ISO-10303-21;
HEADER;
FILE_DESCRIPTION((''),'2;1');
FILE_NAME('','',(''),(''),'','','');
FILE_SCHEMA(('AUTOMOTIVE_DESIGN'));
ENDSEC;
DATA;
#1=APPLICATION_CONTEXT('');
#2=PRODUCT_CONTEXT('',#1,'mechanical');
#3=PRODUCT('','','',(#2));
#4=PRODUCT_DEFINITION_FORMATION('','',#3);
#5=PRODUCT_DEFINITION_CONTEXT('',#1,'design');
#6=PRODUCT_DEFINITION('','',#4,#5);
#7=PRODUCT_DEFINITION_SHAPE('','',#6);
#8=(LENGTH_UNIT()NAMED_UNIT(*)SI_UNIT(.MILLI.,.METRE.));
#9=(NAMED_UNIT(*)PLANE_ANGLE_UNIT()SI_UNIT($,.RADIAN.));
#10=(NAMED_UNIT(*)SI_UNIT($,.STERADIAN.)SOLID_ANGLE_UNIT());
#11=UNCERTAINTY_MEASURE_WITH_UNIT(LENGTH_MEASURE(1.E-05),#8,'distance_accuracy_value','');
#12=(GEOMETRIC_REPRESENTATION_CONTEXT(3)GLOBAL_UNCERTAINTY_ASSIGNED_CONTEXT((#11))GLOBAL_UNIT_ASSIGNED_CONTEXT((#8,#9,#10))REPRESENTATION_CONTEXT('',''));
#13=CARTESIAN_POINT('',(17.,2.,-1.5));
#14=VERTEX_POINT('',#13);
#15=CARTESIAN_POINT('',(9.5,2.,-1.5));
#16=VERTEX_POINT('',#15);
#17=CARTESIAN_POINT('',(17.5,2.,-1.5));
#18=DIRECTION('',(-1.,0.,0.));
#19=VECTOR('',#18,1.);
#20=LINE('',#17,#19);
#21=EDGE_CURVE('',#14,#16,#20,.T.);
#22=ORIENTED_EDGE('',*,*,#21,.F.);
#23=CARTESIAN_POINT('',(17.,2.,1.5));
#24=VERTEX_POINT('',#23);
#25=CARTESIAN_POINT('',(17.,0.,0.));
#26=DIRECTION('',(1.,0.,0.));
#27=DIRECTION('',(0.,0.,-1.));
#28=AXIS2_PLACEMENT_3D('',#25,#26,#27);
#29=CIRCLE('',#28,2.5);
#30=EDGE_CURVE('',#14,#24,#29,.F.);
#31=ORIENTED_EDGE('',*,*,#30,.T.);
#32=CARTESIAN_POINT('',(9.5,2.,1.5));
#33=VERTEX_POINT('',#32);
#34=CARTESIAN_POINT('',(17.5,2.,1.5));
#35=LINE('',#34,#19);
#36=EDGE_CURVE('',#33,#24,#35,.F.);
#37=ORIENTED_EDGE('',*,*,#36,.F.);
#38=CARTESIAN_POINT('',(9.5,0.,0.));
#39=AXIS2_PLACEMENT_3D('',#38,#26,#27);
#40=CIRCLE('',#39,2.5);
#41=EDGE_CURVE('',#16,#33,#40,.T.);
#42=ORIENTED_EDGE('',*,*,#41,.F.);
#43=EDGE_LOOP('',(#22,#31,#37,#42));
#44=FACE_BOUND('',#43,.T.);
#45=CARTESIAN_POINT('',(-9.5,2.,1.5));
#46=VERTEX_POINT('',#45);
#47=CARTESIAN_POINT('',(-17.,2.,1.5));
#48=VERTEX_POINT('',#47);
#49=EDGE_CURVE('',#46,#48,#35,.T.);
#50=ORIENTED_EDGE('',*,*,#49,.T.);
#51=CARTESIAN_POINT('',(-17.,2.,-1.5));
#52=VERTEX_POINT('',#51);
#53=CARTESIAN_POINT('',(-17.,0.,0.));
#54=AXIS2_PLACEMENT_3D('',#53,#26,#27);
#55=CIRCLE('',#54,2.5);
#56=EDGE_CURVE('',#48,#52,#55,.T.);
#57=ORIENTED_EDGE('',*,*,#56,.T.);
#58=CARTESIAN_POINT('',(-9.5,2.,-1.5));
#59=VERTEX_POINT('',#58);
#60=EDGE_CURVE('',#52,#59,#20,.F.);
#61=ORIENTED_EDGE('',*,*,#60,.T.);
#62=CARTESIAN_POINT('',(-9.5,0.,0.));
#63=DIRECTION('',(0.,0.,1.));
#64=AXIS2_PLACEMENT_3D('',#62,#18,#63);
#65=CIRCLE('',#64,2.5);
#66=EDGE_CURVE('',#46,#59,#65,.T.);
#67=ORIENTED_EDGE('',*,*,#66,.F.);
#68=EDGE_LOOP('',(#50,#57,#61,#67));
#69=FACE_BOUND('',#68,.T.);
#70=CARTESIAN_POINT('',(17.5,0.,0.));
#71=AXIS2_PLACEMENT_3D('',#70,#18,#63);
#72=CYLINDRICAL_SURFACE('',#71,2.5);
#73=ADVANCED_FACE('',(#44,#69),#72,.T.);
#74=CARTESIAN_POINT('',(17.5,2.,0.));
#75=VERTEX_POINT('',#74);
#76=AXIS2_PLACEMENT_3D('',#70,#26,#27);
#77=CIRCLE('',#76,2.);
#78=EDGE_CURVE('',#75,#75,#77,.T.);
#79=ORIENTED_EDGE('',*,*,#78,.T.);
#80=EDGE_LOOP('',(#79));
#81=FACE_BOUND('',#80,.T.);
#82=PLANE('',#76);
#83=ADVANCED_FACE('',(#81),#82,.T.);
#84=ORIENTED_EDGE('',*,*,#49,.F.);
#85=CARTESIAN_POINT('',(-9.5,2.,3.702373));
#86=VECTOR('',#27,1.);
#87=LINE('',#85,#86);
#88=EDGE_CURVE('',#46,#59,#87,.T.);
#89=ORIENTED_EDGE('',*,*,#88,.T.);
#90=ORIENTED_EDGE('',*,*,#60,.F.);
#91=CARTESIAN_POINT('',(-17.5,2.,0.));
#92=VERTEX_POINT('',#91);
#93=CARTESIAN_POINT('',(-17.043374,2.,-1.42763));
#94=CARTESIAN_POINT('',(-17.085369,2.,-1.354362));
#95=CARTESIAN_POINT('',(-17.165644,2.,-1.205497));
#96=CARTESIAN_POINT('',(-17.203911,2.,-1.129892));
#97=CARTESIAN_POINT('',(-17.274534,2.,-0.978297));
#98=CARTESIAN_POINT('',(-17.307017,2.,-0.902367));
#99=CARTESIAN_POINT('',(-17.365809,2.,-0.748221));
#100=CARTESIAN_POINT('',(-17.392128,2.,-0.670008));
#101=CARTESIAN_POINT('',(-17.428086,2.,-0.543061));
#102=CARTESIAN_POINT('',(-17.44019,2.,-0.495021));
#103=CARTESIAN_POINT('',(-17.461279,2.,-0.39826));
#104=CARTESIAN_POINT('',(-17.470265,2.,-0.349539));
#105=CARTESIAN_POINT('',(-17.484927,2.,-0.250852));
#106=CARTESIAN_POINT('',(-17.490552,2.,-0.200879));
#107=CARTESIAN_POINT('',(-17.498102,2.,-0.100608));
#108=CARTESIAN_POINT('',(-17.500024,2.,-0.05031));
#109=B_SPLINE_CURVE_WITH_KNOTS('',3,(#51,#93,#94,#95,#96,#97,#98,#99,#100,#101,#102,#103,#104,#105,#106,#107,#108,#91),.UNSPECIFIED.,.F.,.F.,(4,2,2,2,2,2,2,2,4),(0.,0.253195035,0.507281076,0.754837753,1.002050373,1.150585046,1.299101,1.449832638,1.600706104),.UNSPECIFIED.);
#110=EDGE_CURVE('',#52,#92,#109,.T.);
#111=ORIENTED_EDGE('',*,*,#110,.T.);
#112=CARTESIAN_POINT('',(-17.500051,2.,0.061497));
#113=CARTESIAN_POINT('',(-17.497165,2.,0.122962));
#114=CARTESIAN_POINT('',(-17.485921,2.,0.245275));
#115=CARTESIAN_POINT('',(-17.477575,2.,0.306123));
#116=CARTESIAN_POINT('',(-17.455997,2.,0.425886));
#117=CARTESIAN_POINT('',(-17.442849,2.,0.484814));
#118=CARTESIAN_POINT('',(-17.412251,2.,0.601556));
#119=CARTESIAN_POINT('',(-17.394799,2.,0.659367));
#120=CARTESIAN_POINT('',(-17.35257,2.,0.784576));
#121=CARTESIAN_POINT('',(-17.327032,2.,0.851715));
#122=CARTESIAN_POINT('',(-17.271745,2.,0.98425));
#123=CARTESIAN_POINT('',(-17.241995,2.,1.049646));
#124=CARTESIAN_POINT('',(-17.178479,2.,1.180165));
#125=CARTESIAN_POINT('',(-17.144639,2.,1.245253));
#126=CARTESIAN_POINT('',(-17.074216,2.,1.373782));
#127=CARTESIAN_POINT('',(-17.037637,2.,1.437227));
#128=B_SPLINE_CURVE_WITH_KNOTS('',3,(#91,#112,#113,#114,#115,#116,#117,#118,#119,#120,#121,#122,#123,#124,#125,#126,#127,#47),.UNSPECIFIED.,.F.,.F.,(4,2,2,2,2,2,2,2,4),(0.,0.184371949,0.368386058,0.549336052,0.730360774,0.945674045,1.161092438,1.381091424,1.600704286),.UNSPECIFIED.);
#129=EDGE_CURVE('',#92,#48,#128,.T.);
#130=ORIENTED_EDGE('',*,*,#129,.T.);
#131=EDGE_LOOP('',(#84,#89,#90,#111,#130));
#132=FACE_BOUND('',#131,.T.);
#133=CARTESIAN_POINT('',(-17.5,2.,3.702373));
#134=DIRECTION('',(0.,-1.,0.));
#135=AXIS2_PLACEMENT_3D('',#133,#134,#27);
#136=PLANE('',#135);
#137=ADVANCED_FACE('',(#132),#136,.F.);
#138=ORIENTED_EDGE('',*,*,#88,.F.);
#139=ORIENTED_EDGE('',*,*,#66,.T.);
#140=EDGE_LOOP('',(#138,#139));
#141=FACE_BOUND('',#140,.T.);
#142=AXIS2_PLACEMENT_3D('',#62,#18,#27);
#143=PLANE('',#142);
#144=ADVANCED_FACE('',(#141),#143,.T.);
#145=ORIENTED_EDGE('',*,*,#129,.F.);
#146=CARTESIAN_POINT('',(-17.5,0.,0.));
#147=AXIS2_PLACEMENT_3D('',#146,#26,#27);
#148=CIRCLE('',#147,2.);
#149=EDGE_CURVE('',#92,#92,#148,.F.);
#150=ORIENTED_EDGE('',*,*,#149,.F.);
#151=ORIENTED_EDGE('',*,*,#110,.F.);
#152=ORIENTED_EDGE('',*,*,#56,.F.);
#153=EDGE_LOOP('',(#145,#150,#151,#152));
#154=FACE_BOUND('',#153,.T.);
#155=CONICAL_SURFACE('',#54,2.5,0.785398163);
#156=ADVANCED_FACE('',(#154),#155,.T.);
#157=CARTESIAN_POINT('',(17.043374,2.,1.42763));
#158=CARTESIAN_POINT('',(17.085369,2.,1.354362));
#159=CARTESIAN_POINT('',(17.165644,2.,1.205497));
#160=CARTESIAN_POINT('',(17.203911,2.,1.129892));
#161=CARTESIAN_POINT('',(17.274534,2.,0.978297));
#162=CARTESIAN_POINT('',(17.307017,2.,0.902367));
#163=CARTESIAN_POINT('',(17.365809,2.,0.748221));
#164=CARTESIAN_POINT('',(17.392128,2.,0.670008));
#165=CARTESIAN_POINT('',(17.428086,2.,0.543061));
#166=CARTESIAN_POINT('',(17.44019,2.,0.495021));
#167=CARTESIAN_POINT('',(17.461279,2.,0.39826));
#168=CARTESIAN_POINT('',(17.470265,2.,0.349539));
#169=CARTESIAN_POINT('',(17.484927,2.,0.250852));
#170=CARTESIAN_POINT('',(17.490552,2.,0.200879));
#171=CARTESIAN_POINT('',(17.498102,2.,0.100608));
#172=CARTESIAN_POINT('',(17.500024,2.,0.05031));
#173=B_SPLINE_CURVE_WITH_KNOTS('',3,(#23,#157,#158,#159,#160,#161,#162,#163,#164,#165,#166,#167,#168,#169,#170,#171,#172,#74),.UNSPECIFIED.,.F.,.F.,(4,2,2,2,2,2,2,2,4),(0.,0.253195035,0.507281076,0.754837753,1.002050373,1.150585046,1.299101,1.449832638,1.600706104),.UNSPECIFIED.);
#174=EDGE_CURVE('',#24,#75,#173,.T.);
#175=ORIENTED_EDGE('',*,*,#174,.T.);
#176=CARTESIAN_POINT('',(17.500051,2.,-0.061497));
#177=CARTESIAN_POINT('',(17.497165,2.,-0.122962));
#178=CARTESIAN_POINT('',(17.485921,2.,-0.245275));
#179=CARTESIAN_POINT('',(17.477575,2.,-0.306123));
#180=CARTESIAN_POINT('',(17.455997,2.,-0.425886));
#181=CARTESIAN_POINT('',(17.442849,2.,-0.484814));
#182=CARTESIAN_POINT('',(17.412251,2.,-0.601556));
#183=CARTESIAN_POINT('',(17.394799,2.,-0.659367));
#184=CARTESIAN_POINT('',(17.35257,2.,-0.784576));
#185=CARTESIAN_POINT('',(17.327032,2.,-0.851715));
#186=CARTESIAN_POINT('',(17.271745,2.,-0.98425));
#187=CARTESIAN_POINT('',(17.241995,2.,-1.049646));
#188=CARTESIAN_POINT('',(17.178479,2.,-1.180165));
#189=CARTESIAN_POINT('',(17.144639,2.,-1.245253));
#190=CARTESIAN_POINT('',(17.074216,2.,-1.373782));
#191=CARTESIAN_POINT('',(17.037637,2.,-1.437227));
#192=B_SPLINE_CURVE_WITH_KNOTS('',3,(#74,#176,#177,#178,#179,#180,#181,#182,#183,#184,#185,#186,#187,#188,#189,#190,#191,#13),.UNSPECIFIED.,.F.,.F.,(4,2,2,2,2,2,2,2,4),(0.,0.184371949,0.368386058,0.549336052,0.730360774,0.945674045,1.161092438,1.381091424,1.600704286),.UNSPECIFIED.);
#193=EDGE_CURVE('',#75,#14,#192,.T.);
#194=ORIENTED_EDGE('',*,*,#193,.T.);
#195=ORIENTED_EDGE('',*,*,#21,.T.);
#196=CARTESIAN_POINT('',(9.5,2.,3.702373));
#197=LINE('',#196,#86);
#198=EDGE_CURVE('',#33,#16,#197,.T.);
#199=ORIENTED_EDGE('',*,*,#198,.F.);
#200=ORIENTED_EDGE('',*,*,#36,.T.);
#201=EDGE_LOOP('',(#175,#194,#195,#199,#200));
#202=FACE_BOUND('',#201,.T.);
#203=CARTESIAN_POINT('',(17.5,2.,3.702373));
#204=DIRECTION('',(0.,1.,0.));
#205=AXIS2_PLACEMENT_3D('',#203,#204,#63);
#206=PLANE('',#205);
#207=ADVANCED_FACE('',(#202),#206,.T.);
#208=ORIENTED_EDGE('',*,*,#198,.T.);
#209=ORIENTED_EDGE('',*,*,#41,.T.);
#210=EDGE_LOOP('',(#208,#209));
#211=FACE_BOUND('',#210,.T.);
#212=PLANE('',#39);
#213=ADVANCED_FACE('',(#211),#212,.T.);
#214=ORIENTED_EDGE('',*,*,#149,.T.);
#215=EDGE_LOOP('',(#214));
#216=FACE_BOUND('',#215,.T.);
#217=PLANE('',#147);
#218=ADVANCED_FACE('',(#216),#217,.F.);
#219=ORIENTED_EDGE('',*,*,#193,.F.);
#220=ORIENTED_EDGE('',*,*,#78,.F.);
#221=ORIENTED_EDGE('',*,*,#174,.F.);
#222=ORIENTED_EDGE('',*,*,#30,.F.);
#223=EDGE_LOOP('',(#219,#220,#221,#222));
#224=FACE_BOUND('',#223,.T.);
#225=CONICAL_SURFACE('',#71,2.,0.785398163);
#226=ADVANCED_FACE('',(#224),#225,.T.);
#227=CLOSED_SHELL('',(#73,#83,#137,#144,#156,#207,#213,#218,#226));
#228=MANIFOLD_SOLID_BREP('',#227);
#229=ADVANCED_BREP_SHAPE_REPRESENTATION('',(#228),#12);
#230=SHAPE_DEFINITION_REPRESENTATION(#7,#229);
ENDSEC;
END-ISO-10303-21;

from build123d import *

# Parameters (mm, degrees)
SKETCH1_R           = 2.5
BOSS_EXTRUDE1_DEPTH = 17.5
SKETCH2_W           = 7.702473448
SKETCH2_H           = 1.959232648
CUT_EXTRUDE1_DEPTH  = 28.230497608
CHAMFER4_SIZE       = 0.5
CHAMFER5_SIZE       = 0.5


with BuildPart() as part:
    # Sketch1 → Boss-Extrude1 (new, symmetric)
    with BuildSketch(Plane(origin=(0, 0, 0), x_dir=(0, 0, -1), z_dir=(1, 0, 0))):
        Circle(SKETCH1_R)
    extrude(amount=BOSS_EXTRUDE1_DEPTH, both=True)

    # Sketch2 → Cut-Extrude1 (cut, through all)
    with BuildSketch(Plane(origin=(9.5, 0, 0), x_dir=(0, 0, -1), z_dir=(1, 0, 0))):
        with Locations((0.148863265, 2.979616324)):
            Rectangle(SKETCH2_W, SKETCH2_H)
    cut_extrude1 = extrude(amount=CUT_EXTRUDE1_DEPTH, mode=Mode.SUBTRACT)

    # Mirror1: Cut-Extrude1 across plane
    add(cut_extrude1.mirror(Plane(origin=(0, 0, 0), x_dir=(0, 0, 1), z_dir=(1, 0, 0))), mode=Mode.SUBTRACT)

    # Chamfer4
    chamfer4_edges = [part.edges().sort_by_distance(p)[0] for p in [
        (17.5, -2.236067977, 1.118033989),
    ]]
    chamfer(chamfer4_edges, length=CHAMFER4_SIZE - 0.0001)  # a hair under: the kernel refuses the full size

    # Chamfer5
    chamfer5_edges = [part.edges().sort_by_distance(p)[0] for p in [
        (-17.5, -2.236067977, 1.118033989),
    ]]
    chamfer(chamfer5_edges, length=CHAMFER5_SIZE - 0.0001)  # a hair under: the kernel refuses the full size


solid = part.part
